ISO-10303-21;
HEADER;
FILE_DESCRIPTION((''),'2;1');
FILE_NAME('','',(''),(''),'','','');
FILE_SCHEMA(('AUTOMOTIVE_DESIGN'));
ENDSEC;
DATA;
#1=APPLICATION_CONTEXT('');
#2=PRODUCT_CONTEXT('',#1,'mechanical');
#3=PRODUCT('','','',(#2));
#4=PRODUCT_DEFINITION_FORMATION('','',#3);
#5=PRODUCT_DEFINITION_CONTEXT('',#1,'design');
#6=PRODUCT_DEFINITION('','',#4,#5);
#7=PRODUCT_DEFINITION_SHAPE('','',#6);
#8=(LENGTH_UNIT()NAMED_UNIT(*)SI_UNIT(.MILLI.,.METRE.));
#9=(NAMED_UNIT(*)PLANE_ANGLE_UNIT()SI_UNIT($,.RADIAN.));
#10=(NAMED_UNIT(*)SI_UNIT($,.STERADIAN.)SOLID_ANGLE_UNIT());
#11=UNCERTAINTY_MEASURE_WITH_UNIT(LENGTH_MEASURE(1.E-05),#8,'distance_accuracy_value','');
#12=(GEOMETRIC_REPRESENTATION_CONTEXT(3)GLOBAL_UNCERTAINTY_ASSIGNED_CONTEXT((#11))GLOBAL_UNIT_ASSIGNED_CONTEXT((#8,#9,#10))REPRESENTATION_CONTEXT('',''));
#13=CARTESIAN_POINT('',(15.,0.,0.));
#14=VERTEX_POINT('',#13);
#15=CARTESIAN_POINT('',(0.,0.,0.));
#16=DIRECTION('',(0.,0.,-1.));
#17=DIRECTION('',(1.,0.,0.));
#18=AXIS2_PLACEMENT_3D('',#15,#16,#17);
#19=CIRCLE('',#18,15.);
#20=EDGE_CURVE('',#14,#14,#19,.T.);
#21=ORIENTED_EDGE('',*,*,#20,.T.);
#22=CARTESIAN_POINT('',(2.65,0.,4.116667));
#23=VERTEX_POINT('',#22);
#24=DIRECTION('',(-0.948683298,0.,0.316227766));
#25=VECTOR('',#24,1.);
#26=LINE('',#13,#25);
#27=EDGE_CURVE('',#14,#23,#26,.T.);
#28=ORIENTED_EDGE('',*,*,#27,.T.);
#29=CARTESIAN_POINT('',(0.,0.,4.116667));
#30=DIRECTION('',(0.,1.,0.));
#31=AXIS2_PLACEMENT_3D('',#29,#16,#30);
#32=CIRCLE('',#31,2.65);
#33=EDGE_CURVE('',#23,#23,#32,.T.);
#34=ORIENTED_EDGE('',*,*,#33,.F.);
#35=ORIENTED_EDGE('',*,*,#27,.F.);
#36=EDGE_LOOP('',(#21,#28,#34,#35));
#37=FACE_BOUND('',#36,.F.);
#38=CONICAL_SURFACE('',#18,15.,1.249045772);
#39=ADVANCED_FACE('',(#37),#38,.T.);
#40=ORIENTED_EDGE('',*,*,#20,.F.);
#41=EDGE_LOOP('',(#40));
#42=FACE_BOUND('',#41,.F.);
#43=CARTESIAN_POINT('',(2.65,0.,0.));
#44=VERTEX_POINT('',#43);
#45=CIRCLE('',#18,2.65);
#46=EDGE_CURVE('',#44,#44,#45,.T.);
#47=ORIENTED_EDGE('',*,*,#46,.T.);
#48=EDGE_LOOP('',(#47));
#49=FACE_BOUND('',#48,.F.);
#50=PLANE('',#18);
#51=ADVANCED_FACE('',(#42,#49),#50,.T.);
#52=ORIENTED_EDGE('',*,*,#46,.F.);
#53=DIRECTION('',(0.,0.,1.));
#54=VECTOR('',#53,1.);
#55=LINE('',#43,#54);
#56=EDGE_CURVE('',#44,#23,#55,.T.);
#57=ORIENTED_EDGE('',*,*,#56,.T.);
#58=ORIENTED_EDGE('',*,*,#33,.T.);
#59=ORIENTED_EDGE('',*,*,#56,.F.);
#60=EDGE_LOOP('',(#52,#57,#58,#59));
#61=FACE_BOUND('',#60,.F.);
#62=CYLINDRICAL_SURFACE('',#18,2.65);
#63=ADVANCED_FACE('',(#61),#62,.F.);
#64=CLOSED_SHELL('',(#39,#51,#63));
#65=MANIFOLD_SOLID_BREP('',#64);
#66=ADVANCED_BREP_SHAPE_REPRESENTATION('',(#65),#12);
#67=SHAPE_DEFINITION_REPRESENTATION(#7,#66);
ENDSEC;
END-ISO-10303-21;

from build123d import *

# Parameters (mm, degrees)
F2_R     = 2.65
F3_DEPTH = 44


# Not quite as in the source:
# - an extrude ends at something that could not be found from the text; its depth is read off the source's solid


with BuildPart() as f1:
    # F0 (on Front) → F1 (revolve)
    with BuildSketch(Plane.XZ):
        Polygon((0, 5), (0, 0), (15, 0), align=None)
    revolve(axis=Axis((0, 0, 2.5), (0, 0, -1)))

    # F2 (on face) → F3 (cut, through all)
    with BuildSketch(Plane(origin=(0, 0, 0), x_dir=(1, 0, 0), z_dir=(0, 0, -1))):
        Circle(F2_R)
    extrude(amount=-F3_DEPTH, mode=Mode.SUBTRACT)


solid = f1.part
